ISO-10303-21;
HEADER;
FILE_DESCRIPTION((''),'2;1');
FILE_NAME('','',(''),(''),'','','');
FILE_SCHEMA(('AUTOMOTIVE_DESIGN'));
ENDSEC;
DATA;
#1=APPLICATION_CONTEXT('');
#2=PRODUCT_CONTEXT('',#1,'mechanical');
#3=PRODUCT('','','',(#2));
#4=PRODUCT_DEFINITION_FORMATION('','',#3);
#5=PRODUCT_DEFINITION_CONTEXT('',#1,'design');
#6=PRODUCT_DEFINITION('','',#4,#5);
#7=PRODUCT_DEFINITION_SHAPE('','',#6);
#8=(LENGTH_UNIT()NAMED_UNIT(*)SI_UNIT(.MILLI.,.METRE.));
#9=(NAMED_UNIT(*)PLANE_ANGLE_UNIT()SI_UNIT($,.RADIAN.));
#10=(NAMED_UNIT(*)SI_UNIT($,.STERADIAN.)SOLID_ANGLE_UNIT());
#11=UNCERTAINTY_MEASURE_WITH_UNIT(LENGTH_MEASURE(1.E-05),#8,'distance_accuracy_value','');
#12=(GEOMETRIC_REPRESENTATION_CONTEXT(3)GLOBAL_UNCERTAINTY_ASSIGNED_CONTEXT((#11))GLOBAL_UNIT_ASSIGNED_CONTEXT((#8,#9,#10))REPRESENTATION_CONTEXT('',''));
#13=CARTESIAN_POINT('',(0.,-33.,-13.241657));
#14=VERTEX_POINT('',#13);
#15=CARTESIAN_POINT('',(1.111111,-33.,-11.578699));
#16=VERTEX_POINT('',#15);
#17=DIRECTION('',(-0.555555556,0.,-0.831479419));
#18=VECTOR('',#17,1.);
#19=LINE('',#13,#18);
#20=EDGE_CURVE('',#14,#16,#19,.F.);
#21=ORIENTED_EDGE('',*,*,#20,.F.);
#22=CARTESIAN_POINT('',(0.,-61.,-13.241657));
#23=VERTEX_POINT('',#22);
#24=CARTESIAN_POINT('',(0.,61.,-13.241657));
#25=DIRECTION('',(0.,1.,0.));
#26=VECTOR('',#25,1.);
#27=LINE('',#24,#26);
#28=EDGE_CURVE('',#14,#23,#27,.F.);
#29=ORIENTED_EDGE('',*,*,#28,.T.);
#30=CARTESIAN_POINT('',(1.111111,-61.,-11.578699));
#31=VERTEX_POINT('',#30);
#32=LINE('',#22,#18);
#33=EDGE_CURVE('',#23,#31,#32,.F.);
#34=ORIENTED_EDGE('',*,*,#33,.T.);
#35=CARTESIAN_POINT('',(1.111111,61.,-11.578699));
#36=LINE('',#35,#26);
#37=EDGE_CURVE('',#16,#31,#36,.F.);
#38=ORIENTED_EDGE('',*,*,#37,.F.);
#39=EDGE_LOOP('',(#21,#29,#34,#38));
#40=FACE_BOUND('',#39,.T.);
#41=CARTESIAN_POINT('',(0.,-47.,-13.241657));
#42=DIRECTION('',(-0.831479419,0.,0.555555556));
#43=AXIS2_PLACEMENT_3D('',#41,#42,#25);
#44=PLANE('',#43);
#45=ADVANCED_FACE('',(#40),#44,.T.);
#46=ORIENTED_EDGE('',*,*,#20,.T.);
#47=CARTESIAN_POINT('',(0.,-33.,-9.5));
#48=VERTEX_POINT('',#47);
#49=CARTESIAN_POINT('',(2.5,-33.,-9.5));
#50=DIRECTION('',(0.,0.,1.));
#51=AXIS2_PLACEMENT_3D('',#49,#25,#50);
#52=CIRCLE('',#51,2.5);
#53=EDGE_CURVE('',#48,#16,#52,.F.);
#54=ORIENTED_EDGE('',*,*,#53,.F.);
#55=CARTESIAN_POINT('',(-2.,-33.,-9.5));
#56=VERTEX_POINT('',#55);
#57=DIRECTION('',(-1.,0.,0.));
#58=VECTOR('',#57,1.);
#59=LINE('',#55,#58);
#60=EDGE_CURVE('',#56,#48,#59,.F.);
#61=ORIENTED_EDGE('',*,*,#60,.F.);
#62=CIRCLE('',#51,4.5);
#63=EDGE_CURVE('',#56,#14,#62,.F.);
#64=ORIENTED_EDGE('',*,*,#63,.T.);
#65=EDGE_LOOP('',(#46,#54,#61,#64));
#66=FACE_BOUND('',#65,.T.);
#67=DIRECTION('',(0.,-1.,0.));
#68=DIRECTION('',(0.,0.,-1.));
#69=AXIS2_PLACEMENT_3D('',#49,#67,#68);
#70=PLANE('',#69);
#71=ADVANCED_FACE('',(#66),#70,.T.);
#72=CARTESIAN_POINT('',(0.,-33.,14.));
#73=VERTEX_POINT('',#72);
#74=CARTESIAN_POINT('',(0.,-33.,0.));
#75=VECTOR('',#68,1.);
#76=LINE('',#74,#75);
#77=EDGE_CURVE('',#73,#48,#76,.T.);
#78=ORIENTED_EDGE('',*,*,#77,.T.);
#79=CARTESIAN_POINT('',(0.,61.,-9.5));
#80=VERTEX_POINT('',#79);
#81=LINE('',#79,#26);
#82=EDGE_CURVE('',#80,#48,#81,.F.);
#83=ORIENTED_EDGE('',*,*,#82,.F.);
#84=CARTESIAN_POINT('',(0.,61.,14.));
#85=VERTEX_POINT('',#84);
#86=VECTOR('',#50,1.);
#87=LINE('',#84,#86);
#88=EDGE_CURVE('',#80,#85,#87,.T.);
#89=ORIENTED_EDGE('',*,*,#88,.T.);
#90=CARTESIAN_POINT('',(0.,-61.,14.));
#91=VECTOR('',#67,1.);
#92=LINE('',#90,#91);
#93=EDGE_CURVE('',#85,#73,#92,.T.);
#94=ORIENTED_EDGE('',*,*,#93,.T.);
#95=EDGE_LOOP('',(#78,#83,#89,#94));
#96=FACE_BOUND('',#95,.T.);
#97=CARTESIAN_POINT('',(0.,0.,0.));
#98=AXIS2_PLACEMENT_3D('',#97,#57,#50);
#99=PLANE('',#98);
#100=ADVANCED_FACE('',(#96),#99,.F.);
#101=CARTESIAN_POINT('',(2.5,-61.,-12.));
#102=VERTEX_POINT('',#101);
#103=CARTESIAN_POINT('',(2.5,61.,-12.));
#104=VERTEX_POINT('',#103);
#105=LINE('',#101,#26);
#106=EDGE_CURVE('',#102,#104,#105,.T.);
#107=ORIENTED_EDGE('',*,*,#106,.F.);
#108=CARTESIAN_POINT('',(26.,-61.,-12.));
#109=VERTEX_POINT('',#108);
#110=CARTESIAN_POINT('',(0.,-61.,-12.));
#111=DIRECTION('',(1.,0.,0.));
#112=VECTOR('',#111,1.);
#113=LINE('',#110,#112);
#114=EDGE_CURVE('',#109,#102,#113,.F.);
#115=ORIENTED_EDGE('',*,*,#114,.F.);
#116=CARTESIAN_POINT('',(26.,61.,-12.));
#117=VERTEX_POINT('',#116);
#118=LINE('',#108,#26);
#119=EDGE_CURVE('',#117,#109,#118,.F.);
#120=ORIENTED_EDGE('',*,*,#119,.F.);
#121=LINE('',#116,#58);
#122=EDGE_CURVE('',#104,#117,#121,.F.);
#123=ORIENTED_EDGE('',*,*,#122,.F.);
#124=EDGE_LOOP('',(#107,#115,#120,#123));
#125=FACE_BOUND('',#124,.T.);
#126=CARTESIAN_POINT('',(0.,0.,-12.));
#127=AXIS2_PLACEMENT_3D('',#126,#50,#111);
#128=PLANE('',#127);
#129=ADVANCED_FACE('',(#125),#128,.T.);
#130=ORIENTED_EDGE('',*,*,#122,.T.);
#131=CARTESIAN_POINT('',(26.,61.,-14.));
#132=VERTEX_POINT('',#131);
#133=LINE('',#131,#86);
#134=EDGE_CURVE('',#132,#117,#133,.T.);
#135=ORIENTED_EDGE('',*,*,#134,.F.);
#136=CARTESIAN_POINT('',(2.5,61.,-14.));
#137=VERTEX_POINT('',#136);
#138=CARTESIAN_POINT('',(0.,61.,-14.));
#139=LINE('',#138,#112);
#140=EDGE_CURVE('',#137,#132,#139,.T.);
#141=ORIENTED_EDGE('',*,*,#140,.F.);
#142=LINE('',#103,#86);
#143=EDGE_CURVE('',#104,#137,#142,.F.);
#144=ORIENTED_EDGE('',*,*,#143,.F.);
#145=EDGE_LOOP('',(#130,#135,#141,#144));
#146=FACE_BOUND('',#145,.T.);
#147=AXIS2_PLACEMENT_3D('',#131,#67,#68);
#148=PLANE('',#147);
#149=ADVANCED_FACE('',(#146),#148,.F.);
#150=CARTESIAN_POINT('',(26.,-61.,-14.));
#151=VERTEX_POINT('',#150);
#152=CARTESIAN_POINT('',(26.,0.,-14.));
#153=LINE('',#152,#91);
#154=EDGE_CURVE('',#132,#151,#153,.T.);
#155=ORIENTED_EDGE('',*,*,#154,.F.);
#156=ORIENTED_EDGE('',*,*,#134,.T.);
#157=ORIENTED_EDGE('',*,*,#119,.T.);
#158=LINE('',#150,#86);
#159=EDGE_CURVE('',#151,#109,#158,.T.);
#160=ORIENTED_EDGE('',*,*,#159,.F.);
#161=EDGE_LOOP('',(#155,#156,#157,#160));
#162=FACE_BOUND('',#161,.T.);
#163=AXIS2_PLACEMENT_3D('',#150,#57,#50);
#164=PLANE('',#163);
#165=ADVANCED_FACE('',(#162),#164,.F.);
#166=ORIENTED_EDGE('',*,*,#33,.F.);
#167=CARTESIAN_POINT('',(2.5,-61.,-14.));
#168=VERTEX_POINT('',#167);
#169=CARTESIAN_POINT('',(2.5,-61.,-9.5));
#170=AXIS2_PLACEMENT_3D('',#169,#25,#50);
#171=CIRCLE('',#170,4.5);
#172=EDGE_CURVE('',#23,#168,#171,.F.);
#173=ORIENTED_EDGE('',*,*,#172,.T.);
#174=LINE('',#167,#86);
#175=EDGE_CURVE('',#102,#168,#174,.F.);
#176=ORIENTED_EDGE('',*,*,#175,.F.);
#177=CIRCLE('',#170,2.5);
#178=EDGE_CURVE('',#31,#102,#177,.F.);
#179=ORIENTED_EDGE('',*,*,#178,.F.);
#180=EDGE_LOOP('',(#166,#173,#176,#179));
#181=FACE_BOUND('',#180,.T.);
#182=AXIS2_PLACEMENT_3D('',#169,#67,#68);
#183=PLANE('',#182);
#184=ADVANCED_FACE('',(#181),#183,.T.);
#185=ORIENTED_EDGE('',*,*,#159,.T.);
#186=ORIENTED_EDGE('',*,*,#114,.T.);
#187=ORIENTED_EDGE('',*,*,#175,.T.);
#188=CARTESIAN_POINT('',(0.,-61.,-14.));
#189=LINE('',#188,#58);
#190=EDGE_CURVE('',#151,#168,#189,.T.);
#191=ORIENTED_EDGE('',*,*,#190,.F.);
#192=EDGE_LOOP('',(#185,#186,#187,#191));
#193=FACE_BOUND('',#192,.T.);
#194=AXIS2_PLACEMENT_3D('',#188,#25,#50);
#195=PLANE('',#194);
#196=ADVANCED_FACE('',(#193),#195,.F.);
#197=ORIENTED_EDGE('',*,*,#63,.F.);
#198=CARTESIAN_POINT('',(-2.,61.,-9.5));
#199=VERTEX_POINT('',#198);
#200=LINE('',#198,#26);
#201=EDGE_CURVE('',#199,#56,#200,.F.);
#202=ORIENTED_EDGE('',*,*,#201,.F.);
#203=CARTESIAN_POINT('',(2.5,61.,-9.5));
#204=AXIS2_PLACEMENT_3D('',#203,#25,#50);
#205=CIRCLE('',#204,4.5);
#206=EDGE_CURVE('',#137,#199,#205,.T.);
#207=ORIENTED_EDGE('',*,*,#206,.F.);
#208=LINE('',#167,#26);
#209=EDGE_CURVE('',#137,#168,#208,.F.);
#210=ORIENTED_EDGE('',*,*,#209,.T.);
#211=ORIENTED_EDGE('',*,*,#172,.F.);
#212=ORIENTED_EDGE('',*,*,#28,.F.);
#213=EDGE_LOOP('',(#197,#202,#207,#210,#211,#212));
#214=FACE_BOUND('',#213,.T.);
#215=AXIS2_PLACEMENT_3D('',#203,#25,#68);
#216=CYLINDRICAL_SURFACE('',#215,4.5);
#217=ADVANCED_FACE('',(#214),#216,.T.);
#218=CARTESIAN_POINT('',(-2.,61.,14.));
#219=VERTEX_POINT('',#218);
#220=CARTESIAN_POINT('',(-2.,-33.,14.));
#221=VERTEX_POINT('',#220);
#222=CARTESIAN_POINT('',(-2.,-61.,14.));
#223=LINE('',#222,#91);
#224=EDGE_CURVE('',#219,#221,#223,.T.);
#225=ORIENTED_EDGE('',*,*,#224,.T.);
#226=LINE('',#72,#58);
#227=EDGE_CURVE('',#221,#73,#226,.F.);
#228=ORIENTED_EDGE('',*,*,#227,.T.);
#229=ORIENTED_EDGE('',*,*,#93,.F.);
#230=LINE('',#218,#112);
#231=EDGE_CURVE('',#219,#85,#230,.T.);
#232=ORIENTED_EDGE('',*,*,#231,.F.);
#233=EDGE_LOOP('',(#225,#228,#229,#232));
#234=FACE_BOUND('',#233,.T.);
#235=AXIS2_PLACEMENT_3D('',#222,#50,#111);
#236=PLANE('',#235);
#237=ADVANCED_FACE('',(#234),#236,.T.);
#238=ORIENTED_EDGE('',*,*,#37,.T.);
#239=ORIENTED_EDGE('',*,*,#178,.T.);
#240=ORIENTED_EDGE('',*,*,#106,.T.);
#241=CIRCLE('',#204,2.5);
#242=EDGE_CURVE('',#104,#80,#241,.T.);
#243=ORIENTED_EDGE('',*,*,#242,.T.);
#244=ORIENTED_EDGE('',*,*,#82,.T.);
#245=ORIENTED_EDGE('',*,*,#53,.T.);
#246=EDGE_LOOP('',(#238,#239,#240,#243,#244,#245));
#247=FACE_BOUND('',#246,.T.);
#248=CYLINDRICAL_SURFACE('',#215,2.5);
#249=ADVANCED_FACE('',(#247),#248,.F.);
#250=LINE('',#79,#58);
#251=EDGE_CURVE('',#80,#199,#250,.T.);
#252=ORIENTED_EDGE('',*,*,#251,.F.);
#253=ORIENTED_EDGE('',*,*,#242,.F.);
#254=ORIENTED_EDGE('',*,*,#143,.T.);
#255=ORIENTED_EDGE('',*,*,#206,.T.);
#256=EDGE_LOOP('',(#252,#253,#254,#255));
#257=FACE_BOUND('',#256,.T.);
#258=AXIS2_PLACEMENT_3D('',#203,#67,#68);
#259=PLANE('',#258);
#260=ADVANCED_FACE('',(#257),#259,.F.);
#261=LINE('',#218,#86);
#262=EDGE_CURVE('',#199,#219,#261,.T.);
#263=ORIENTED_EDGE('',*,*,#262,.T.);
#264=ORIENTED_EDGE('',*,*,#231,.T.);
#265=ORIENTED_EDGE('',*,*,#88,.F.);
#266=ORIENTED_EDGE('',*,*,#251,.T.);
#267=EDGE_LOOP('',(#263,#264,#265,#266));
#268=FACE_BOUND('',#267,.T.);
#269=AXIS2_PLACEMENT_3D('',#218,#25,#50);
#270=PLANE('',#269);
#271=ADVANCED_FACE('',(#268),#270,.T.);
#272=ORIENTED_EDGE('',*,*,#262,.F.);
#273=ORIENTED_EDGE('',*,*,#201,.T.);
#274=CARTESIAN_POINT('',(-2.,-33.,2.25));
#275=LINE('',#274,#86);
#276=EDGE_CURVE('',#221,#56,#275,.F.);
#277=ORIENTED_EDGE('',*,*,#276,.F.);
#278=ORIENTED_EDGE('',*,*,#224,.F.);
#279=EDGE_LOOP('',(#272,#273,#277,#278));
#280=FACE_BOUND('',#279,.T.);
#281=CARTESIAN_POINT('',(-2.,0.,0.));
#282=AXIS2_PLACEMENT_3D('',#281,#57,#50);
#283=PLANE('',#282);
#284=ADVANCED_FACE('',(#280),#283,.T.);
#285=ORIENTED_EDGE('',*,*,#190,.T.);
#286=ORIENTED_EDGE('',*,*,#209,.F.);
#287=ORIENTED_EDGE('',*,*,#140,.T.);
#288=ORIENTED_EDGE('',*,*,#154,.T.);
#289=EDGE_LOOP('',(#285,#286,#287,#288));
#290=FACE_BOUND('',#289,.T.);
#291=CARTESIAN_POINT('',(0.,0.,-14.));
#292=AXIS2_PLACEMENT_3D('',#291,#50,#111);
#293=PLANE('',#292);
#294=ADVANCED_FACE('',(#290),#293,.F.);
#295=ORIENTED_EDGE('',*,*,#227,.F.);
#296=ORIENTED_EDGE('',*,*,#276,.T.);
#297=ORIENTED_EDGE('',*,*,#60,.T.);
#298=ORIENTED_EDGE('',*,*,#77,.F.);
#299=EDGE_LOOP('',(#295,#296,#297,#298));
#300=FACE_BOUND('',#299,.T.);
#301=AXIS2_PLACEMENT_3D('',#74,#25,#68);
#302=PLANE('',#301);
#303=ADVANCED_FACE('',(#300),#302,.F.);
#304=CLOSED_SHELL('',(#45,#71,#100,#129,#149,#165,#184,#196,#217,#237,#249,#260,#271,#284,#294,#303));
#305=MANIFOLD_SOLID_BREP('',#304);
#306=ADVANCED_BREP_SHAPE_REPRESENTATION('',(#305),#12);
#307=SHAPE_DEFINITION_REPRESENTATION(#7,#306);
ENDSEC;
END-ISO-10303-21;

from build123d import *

# Parameters (mm, degrees)
SKETCH1_W                    = 28
SKETCH1_H                    = 122
BASE_FLANGE1_DEPTH           = 2
EDGE_FLANGE1_STRIP_W         = 13
EDGE_FLANGE1_STRIP_H         = 2
EDGE_FLANGE1_STRIP_CUT_DEPTH = 122
EDGE_FLANGE1_DEPTH           = 122
CUT_EXTRUDE1_START           = -61
CUT_EXTRUDE1_DEPTH           = 28


# Read off the part's stored shape, not the designer's step: Cut-Extrude1
# Sheet-metal steps are written as plain solids
with BuildPart() as part:
    # Sketch1 → Base-Flange1 (new body)
    with BuildSketch(Plane(origin=(0, 0, 0), x_dir=(0, 0, -1), z_dir=(1, 0, 0))):
        Rectangle(SKETCH1_W, SKETCH1_H)
    extrude(amount=-BASE_FLANGE1_DEPTH)

    # Edge-Flange1 strip (across the edge) → Edge-Flange1 strip cut (cut)
    with BuildSketch(Plane(origin=(0, -61, -14), x_dir=(0, 0, 1), z_dir=(0, 1, 0))):
        with Locations((-2, -1)):
            Rectangle(EDGE_FLANGE1_STRIP_W, EDGE_FLANGE1_STRIP_H)
    extrude(amount=EDGE_FLANGE1_STRIP_CUT_DEPTH, mode=Mode.SUBTRACT)

    # Edge-Flange1 section (across the edge) → Edge-Flange1 (add)
    with BuildSketch(Plane(origin=(0, -61, -14), x_dir=(0, 0, 1), z_dir=(0, 1, 0))):
        with BuildLine():
            Line((0, 2.5), (0, 26))
            Line((0, 26), (2, 26))
            Line((2, 26), (2, 2.5))
            ThreePointArc((2, 2.5), (2.732233047, 0.732233047), (4.5, 0))
            Line((4.5, 0), (4.5, -2))
            ThreePointArc((4.5, -2), (1.318019485, -0.681980515), (0, 2.5))
        make_face()
    extrude(amount=EDGE_FLANGE1_DEPTH)

    # Cut-Extrude1 outline → Cut-Extrude1 (cut)
    with BuildSketch(Plane(origin=(0, 0, 0), x_dir=(1, 0, 0), z_dir=(0, 1, 0)).offset(CUT_EXTRUDE1_START)):
        with BuildLine():
            Line((1.111111111, 11.578698548), (0, 13.241657386))
            ThreePointArc((0, 13.241657386), (-1.468626966, 11.621320343), (-2, 9.5))
            Line((-2, 9.5), (-2, -14))
            Line((-2, -14), (0, -14))
            Line((0, -14), (0, 9.5))
            ThreePointArc((0, 9.5), (0.295207241, 10.678511302), (1.111111111, 11.578698548))
        make_face()
    extrude(amount=CUT_EXTRUDE1_DEPTH, mode=Mode.SUBTRACT)


solid = part.part
